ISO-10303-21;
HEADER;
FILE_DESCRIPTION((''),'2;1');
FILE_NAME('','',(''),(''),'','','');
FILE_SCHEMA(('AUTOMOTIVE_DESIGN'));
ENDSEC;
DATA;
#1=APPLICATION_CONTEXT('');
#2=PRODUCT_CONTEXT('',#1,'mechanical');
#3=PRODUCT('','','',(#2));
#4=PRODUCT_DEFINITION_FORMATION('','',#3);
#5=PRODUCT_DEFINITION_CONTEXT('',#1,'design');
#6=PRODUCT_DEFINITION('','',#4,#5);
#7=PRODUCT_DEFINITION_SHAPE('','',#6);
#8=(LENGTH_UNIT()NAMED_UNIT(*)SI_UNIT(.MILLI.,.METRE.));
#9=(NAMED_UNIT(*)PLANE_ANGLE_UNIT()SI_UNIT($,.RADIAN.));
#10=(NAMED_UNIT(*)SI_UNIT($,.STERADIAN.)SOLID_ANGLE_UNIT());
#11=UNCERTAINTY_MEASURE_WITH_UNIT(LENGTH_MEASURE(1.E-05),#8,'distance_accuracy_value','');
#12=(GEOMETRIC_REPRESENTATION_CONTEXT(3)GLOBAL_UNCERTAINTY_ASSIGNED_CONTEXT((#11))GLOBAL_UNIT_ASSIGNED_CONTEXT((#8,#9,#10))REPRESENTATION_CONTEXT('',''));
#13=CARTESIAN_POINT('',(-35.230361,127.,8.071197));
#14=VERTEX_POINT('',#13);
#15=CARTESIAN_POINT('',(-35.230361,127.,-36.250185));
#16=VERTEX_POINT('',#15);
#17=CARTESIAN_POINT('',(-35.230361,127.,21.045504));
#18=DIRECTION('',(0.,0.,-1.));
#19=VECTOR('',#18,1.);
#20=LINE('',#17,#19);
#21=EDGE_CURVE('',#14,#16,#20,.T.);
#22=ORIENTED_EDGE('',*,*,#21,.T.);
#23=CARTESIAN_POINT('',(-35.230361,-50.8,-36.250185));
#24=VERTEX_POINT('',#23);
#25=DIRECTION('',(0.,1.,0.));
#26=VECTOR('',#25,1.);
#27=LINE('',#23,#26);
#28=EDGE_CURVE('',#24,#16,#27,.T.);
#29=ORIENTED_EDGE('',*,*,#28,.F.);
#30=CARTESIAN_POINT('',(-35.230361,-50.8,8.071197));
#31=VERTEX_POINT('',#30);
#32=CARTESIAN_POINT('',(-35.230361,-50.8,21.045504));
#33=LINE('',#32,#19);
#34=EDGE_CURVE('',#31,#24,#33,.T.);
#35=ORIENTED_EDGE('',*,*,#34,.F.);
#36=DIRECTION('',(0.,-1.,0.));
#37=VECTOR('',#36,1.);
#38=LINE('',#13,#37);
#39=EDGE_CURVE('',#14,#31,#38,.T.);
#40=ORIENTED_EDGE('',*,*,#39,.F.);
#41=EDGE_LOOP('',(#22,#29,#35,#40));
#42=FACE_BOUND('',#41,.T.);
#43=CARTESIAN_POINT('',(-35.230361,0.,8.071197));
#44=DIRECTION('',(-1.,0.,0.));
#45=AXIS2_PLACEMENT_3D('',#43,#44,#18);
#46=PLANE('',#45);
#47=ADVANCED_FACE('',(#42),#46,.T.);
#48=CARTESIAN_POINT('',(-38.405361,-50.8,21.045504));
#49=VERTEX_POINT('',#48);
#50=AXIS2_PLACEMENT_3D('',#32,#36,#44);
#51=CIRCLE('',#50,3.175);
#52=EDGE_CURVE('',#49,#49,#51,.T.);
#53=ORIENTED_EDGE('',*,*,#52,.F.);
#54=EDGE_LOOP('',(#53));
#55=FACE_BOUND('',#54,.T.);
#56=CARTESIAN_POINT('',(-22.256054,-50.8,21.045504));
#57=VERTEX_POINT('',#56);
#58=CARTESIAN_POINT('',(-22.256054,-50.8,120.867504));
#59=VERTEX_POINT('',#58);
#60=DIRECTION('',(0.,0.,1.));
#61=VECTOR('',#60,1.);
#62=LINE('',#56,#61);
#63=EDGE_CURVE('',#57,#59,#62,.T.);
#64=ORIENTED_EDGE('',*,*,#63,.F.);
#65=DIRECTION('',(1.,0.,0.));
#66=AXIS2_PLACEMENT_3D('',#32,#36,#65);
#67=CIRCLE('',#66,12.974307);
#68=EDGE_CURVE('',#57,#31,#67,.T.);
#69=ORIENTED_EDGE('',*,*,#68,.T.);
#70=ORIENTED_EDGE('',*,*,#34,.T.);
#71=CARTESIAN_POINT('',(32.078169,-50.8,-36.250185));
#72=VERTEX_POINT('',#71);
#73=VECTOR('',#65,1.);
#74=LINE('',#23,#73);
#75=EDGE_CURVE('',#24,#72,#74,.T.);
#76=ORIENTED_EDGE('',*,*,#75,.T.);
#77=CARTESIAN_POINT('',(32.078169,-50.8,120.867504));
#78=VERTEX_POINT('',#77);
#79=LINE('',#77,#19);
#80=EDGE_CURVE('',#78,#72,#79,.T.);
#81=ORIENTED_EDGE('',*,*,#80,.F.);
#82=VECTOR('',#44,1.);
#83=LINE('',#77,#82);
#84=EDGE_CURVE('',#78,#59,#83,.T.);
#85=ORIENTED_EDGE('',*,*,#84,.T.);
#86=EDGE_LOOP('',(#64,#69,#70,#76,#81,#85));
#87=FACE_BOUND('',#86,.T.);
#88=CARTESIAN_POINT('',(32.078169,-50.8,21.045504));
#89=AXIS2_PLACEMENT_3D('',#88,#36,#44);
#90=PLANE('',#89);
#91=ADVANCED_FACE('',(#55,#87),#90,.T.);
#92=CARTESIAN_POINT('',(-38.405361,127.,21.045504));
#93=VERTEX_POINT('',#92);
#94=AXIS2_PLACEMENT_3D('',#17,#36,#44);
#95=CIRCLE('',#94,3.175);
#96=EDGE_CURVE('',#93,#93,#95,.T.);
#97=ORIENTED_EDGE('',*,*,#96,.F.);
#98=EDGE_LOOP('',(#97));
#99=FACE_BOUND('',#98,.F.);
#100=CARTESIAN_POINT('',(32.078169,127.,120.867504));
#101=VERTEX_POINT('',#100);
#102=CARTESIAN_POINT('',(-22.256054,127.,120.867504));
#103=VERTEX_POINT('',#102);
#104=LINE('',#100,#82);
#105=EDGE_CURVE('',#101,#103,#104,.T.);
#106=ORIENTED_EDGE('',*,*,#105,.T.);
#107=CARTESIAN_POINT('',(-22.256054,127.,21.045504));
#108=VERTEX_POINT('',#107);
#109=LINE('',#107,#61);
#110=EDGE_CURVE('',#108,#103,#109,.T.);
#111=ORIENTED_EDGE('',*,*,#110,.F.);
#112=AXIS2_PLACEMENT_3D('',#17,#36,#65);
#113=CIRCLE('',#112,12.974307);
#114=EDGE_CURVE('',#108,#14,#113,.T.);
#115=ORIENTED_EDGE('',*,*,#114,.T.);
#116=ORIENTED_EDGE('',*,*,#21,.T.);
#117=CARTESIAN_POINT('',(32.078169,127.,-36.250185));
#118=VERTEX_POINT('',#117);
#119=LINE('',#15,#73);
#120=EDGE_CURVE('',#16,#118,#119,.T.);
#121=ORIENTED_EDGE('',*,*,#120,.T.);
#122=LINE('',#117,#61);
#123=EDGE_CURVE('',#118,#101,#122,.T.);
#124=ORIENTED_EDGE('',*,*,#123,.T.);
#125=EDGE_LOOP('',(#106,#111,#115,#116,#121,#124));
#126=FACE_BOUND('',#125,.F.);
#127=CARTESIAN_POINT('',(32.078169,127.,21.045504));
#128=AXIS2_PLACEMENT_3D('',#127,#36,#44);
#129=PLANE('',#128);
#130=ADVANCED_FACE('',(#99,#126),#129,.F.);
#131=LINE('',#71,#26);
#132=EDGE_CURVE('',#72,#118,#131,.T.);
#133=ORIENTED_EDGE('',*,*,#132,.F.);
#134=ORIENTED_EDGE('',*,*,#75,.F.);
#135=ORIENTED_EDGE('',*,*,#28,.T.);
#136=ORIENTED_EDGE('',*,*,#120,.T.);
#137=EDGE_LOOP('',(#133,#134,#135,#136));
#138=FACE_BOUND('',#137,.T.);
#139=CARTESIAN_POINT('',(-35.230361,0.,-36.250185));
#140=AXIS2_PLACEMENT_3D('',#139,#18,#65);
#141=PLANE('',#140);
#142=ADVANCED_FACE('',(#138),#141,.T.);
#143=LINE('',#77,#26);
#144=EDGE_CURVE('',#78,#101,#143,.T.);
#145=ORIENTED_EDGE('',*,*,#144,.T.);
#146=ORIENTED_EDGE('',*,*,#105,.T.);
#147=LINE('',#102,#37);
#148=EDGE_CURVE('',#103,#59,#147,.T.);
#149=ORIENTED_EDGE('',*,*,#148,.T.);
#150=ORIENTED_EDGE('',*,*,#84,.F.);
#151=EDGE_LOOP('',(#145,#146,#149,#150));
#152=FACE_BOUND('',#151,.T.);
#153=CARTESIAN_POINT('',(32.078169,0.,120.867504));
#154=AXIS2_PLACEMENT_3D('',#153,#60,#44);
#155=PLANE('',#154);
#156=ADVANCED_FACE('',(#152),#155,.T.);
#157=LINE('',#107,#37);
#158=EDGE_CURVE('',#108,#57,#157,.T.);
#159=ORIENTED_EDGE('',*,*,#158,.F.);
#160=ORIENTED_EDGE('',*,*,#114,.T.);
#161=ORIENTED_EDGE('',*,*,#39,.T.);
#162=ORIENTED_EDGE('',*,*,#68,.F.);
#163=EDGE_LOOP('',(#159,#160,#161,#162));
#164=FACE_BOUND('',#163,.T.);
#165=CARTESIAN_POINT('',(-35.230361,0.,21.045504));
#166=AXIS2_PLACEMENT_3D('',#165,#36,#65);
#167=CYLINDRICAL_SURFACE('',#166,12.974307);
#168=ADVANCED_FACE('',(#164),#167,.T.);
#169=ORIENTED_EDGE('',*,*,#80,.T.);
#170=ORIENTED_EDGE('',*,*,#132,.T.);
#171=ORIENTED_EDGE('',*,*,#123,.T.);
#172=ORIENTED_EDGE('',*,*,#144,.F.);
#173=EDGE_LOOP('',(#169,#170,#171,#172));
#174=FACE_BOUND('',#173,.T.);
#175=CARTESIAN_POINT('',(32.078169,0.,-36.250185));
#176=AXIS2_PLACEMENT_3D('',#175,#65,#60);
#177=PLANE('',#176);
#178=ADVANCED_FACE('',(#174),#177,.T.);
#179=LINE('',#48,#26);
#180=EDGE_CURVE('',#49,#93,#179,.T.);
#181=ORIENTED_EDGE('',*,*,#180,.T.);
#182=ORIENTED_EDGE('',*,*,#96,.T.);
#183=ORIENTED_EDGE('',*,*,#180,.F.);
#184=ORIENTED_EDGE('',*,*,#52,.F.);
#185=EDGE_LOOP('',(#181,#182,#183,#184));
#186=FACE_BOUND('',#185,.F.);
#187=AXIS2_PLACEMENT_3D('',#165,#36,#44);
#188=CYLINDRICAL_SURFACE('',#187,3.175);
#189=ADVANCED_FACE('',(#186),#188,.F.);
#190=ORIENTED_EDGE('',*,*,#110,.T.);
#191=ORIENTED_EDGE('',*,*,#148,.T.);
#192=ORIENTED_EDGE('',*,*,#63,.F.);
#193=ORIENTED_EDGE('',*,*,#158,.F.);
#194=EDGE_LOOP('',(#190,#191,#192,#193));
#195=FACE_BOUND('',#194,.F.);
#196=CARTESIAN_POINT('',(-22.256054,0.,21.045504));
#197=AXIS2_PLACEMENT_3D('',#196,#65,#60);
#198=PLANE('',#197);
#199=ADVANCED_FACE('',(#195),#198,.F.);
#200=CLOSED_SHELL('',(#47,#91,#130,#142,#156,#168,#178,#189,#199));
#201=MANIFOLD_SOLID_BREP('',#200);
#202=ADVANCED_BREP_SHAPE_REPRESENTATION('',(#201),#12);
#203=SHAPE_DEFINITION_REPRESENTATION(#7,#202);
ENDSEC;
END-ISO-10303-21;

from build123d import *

# Parameters (mm, degrees)
F1_DEPTH      = 25.4
F2_DEPTH      = 25.4
F3_DEPTH      = 99.822
F3_DEPTH_BACK = 25.4
F4_D          = 6.35
F5_DEPTH      = 127


# Not quite as in the source:
# - a feature names something its author has since deleted; it is built from what else it names


with BuildPart() as f1:
    # F0 (on Front) → F1 (new body)
    with BuildSketch(Plane.XZ):
        with BuildLine():
            Line((32.0781692863, 21.0455041379), (-22.2560535658, 21.0455041379))
            ThreePointArc((-22.2560535658, 21.0455041379), (-26.0561402101, 11.8712834228), (-35.2303609252, 8.0711967784))
            Line((-35.2303609252, 8.0711967784), (-35.2303609252, -36.2501852214))
            Line((-35.2303609252, -36.2501852214), (32.0781692863, -36.2501852214))
            Line((32.0781692863, -36.2501852214), (32.0781692863, 21.0455041379))
        make_face()
        with BuildLine():
            Line((-22.2560535658, 21.0455041379), (-35.2303609252, 21.0455041379))
            Line((-35.2303609252, 21.0455041379), (-35.2303609252, 8.0711967784))
            ThreePointArc((-35.2303609252, 8.0711967784), (-26.0561402101, 11.8712834228), (-22.2560535658, 21.0455041379))
        make_face()
        with BuildLine():
            Line((-35.2303609252, 8.0711967784), (-35.2303609252, 21.0455041379))
            Line((-35.2303609252, 21.0455041379), (-22.2560535658, 21.0455041379))
            ThreePointArc((-22.2560535658, 21.0455041379), (-44.4045816403, 30.2197248529), (-35.2303609252, 8.0711967784))
        make_face()
    extrude(amount=F1_DEPTH)

    # F2 (add): a face of the model
    f2_faces = [f1.faces().sort_by_distance(p)[0] for p in [
        (-4.8856962064, -25.4, -4.7596143665),
    ]]
    extrude(f2_faces, amount=F2_DEPTH)

    # F3 (add, two sides): a face of the model
    f3_faces = [f1.faces().sort_by_distance(p)[0] for p in [
        (4.9110578602, -25.4, 21.0455041379),
    ]]
    extrude(f3_faces, amount=F3_DEPTH)
    extrude(f3_faces, amount=-F3_DEPTH_BACK)

    # F4 (through all)
    with Locations(Plane(origin=(0, 0, 0), x_dir=(1, 0, 0), z_dir=(0, 1, 0))):
        with Locations((-35.2303609252, -21.0455041379)):
            Hole(F4_D / 2)

    # F5 (add): a face of the model
    f5_faces = [f1.faces().sort_by_distance(p)[0] for p in [
        (0.7229147363, 0, 37.7328540078),
    ]]
    extrude(f5_faces, amount=F5_DEPTH)


solid = f1.part
